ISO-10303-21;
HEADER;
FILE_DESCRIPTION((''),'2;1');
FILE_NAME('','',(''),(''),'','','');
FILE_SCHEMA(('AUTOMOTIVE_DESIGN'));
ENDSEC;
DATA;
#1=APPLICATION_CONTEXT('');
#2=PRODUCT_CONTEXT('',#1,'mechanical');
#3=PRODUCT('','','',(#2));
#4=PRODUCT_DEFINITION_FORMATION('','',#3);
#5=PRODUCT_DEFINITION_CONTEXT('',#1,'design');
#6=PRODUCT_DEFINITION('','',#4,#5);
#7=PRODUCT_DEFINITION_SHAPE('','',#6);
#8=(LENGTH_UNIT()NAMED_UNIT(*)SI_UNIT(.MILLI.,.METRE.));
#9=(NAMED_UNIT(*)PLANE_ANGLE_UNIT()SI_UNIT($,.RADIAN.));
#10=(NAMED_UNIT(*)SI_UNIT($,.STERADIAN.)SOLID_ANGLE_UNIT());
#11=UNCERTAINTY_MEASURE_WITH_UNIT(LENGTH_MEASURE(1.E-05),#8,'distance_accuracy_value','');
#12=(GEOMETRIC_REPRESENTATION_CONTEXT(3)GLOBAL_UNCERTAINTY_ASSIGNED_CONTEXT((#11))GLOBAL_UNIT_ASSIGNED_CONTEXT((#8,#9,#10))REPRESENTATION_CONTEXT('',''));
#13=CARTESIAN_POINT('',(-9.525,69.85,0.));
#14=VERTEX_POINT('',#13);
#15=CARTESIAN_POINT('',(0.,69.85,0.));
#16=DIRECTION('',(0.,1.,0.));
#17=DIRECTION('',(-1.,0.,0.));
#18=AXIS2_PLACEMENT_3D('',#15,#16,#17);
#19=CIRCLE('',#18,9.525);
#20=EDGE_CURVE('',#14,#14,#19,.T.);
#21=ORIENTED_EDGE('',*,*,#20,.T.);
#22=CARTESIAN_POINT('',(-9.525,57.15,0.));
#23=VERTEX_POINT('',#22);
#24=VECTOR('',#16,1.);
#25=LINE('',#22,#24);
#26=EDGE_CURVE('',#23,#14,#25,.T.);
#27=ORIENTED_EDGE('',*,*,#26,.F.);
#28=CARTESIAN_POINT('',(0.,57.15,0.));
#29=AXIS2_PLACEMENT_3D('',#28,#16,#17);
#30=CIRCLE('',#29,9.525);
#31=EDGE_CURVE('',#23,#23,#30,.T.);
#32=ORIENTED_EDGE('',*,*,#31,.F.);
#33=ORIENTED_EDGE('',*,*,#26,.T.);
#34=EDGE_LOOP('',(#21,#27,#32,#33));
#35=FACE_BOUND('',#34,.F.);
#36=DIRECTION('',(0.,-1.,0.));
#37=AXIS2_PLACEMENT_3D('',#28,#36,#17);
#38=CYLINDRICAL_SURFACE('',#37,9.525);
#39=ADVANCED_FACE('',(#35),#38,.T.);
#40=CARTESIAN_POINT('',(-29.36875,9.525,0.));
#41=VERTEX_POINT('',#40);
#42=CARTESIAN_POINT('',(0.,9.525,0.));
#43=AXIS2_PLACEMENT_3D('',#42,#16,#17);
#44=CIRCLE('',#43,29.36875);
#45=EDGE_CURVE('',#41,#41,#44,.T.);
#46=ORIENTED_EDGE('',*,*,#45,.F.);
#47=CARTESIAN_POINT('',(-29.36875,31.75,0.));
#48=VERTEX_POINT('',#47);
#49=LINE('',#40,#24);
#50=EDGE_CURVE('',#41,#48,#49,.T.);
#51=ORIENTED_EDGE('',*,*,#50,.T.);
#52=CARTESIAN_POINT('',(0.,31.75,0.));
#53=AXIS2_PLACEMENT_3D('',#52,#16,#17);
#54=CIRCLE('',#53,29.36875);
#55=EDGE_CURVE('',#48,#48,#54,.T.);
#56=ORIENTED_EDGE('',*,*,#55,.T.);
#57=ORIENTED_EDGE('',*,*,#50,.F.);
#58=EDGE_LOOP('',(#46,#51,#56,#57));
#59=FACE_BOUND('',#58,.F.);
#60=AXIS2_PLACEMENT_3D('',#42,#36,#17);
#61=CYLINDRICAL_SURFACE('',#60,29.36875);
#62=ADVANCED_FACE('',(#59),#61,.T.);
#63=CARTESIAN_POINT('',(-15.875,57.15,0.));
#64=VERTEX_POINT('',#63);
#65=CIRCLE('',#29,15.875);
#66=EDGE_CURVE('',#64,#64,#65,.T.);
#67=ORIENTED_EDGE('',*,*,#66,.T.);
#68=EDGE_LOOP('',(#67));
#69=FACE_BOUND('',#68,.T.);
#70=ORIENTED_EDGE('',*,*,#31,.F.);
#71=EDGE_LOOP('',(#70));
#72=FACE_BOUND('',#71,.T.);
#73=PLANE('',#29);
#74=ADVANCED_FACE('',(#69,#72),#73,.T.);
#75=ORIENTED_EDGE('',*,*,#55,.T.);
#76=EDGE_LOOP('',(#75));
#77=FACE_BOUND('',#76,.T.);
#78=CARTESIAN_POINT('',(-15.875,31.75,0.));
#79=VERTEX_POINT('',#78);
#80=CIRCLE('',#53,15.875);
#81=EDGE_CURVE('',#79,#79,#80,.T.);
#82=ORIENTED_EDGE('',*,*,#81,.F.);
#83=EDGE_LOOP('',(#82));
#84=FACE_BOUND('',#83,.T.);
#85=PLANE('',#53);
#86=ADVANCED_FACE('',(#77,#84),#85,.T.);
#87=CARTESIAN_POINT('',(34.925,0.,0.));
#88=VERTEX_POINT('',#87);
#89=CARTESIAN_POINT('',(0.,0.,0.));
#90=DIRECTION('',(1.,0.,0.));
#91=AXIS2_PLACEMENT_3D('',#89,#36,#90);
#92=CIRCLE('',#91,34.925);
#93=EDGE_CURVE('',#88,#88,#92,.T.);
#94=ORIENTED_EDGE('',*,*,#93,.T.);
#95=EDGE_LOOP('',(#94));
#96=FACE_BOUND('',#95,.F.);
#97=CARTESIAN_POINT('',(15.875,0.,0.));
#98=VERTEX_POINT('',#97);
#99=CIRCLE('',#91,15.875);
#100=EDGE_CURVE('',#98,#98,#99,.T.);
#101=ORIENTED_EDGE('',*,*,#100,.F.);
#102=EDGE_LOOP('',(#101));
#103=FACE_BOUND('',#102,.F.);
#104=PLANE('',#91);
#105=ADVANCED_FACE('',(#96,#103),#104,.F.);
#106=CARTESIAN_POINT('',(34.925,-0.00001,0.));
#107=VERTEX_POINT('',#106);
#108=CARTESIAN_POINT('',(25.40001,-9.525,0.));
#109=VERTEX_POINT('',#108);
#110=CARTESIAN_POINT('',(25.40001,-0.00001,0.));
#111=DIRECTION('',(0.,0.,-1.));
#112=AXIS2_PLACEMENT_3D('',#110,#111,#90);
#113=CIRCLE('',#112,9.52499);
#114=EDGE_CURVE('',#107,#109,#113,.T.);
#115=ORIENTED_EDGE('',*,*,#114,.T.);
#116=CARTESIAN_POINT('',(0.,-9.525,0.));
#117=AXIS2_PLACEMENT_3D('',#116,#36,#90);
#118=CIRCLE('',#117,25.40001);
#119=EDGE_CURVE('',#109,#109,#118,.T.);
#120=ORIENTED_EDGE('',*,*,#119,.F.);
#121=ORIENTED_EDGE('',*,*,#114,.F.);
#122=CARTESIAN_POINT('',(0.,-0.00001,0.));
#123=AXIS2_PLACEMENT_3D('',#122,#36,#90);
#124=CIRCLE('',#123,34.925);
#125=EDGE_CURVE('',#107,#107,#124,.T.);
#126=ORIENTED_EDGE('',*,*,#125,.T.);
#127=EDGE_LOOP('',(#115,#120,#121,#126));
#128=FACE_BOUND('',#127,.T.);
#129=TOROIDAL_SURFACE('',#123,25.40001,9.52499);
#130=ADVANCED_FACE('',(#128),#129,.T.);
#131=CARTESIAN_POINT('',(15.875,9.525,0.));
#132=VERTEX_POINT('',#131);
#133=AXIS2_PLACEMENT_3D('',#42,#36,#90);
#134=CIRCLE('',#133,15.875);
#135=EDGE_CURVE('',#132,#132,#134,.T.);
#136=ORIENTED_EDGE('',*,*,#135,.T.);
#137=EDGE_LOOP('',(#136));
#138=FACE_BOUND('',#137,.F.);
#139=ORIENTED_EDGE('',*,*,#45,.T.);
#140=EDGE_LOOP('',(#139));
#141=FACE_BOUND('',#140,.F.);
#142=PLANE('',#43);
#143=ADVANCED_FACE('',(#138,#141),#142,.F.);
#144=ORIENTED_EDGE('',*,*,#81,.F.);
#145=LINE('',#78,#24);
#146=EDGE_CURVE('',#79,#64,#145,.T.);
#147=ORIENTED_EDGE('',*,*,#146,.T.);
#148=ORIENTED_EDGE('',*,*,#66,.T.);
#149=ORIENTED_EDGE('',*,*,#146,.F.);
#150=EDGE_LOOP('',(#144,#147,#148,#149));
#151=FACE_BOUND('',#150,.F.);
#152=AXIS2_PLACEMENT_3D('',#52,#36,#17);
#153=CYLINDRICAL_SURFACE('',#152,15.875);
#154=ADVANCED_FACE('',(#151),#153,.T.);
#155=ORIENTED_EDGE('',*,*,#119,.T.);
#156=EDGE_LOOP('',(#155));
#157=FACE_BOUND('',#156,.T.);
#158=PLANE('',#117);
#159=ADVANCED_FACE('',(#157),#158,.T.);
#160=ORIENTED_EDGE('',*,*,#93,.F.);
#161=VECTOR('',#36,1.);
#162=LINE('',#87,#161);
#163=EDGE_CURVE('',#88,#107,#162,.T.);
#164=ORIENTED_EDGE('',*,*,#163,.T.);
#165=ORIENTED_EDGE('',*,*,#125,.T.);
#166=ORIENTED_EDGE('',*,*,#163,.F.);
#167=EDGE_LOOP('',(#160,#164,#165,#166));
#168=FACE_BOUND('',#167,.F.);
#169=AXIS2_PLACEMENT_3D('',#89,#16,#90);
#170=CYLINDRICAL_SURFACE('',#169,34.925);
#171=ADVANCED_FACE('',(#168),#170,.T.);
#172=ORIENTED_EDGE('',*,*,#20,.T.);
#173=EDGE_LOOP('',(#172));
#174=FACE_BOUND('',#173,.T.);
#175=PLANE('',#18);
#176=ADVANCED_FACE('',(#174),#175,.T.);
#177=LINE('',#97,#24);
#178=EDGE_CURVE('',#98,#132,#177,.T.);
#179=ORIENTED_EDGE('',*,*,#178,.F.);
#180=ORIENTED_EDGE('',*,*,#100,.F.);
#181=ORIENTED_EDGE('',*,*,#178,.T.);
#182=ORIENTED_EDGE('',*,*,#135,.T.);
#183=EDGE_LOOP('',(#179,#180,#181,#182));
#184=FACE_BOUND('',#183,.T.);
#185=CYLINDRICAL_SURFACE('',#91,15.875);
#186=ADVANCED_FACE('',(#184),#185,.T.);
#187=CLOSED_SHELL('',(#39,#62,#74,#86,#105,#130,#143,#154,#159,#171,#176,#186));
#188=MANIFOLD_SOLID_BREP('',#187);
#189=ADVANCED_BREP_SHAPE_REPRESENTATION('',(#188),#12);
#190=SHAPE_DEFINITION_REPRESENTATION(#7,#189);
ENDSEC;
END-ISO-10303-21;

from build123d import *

# Parameters (mm, degrees)
F0_R     = 15.875
F1_DEPTH = 9.525
F2_R     = 29.36875
F3_DEPTH = 22.225
F4_R     = 15.875
F5_DEPTH = 25.4
F6_R     = 9.525
F7_DEPTH = 12.7
F8_R     = 34.925
F9_DEPTH = 9.525
F10_R    = 9.52499


# Not quite as in the source:
# - a fillet or chamfer is up to 0.001 mm smaller than in the source, because OpenCascade refuses the exact size


with BuildPart() as f1:
    # F0 (on Front) → F1 (new body)
    with BuildSketch(Plane.XZ):
        Circle(F0_R)
    extrude(amount=-F1_DEPTH)

    # F2 (on face) → F3 (join)
    with BuildSketch(Plane(origin=(0, 9.525, 0), x_dir=(-1, 0, 0), z_dir=(0, 1, 0))):
        Circle(F2_R)
    extrude(amount=F3_DEPTH)

    # F4 (on face) → F5 (join)
    with BuildSketch(Plane(origin=(0, 31.75, 0), x_dir=(-1, 0, 0), z_dir=(0, 1, 0))):
        Circle(F4_R)
    extrude(amount=F5_DEPTH)

    # F6 (on face) → F7 (join)
    with BuildSketch(Plane(origin=(0, 57.15, 0), x_dir=(-1, 0, 0), z_dir=(0, 1, 0))):
        Circle(F6_R)
    extrude(amount=F7_DEPTH)

    # F8 (on face) → F9 (join)
    with BuildSketch(Plane.XZ):
        Circle(F8_R)
    extrude(amount=F9_DEPTH)

    # F10 (radius 9.525 in the source; OpenCascade refuses exactly that, so slightly less here)
    f10_edges = [f1.edges().sort_by_distance(p)[0] for p in [
        (-34.925, -9.525, 0),
    ]]
    fillet(f10_edges, radius=F10_R)


solid = f1.part
